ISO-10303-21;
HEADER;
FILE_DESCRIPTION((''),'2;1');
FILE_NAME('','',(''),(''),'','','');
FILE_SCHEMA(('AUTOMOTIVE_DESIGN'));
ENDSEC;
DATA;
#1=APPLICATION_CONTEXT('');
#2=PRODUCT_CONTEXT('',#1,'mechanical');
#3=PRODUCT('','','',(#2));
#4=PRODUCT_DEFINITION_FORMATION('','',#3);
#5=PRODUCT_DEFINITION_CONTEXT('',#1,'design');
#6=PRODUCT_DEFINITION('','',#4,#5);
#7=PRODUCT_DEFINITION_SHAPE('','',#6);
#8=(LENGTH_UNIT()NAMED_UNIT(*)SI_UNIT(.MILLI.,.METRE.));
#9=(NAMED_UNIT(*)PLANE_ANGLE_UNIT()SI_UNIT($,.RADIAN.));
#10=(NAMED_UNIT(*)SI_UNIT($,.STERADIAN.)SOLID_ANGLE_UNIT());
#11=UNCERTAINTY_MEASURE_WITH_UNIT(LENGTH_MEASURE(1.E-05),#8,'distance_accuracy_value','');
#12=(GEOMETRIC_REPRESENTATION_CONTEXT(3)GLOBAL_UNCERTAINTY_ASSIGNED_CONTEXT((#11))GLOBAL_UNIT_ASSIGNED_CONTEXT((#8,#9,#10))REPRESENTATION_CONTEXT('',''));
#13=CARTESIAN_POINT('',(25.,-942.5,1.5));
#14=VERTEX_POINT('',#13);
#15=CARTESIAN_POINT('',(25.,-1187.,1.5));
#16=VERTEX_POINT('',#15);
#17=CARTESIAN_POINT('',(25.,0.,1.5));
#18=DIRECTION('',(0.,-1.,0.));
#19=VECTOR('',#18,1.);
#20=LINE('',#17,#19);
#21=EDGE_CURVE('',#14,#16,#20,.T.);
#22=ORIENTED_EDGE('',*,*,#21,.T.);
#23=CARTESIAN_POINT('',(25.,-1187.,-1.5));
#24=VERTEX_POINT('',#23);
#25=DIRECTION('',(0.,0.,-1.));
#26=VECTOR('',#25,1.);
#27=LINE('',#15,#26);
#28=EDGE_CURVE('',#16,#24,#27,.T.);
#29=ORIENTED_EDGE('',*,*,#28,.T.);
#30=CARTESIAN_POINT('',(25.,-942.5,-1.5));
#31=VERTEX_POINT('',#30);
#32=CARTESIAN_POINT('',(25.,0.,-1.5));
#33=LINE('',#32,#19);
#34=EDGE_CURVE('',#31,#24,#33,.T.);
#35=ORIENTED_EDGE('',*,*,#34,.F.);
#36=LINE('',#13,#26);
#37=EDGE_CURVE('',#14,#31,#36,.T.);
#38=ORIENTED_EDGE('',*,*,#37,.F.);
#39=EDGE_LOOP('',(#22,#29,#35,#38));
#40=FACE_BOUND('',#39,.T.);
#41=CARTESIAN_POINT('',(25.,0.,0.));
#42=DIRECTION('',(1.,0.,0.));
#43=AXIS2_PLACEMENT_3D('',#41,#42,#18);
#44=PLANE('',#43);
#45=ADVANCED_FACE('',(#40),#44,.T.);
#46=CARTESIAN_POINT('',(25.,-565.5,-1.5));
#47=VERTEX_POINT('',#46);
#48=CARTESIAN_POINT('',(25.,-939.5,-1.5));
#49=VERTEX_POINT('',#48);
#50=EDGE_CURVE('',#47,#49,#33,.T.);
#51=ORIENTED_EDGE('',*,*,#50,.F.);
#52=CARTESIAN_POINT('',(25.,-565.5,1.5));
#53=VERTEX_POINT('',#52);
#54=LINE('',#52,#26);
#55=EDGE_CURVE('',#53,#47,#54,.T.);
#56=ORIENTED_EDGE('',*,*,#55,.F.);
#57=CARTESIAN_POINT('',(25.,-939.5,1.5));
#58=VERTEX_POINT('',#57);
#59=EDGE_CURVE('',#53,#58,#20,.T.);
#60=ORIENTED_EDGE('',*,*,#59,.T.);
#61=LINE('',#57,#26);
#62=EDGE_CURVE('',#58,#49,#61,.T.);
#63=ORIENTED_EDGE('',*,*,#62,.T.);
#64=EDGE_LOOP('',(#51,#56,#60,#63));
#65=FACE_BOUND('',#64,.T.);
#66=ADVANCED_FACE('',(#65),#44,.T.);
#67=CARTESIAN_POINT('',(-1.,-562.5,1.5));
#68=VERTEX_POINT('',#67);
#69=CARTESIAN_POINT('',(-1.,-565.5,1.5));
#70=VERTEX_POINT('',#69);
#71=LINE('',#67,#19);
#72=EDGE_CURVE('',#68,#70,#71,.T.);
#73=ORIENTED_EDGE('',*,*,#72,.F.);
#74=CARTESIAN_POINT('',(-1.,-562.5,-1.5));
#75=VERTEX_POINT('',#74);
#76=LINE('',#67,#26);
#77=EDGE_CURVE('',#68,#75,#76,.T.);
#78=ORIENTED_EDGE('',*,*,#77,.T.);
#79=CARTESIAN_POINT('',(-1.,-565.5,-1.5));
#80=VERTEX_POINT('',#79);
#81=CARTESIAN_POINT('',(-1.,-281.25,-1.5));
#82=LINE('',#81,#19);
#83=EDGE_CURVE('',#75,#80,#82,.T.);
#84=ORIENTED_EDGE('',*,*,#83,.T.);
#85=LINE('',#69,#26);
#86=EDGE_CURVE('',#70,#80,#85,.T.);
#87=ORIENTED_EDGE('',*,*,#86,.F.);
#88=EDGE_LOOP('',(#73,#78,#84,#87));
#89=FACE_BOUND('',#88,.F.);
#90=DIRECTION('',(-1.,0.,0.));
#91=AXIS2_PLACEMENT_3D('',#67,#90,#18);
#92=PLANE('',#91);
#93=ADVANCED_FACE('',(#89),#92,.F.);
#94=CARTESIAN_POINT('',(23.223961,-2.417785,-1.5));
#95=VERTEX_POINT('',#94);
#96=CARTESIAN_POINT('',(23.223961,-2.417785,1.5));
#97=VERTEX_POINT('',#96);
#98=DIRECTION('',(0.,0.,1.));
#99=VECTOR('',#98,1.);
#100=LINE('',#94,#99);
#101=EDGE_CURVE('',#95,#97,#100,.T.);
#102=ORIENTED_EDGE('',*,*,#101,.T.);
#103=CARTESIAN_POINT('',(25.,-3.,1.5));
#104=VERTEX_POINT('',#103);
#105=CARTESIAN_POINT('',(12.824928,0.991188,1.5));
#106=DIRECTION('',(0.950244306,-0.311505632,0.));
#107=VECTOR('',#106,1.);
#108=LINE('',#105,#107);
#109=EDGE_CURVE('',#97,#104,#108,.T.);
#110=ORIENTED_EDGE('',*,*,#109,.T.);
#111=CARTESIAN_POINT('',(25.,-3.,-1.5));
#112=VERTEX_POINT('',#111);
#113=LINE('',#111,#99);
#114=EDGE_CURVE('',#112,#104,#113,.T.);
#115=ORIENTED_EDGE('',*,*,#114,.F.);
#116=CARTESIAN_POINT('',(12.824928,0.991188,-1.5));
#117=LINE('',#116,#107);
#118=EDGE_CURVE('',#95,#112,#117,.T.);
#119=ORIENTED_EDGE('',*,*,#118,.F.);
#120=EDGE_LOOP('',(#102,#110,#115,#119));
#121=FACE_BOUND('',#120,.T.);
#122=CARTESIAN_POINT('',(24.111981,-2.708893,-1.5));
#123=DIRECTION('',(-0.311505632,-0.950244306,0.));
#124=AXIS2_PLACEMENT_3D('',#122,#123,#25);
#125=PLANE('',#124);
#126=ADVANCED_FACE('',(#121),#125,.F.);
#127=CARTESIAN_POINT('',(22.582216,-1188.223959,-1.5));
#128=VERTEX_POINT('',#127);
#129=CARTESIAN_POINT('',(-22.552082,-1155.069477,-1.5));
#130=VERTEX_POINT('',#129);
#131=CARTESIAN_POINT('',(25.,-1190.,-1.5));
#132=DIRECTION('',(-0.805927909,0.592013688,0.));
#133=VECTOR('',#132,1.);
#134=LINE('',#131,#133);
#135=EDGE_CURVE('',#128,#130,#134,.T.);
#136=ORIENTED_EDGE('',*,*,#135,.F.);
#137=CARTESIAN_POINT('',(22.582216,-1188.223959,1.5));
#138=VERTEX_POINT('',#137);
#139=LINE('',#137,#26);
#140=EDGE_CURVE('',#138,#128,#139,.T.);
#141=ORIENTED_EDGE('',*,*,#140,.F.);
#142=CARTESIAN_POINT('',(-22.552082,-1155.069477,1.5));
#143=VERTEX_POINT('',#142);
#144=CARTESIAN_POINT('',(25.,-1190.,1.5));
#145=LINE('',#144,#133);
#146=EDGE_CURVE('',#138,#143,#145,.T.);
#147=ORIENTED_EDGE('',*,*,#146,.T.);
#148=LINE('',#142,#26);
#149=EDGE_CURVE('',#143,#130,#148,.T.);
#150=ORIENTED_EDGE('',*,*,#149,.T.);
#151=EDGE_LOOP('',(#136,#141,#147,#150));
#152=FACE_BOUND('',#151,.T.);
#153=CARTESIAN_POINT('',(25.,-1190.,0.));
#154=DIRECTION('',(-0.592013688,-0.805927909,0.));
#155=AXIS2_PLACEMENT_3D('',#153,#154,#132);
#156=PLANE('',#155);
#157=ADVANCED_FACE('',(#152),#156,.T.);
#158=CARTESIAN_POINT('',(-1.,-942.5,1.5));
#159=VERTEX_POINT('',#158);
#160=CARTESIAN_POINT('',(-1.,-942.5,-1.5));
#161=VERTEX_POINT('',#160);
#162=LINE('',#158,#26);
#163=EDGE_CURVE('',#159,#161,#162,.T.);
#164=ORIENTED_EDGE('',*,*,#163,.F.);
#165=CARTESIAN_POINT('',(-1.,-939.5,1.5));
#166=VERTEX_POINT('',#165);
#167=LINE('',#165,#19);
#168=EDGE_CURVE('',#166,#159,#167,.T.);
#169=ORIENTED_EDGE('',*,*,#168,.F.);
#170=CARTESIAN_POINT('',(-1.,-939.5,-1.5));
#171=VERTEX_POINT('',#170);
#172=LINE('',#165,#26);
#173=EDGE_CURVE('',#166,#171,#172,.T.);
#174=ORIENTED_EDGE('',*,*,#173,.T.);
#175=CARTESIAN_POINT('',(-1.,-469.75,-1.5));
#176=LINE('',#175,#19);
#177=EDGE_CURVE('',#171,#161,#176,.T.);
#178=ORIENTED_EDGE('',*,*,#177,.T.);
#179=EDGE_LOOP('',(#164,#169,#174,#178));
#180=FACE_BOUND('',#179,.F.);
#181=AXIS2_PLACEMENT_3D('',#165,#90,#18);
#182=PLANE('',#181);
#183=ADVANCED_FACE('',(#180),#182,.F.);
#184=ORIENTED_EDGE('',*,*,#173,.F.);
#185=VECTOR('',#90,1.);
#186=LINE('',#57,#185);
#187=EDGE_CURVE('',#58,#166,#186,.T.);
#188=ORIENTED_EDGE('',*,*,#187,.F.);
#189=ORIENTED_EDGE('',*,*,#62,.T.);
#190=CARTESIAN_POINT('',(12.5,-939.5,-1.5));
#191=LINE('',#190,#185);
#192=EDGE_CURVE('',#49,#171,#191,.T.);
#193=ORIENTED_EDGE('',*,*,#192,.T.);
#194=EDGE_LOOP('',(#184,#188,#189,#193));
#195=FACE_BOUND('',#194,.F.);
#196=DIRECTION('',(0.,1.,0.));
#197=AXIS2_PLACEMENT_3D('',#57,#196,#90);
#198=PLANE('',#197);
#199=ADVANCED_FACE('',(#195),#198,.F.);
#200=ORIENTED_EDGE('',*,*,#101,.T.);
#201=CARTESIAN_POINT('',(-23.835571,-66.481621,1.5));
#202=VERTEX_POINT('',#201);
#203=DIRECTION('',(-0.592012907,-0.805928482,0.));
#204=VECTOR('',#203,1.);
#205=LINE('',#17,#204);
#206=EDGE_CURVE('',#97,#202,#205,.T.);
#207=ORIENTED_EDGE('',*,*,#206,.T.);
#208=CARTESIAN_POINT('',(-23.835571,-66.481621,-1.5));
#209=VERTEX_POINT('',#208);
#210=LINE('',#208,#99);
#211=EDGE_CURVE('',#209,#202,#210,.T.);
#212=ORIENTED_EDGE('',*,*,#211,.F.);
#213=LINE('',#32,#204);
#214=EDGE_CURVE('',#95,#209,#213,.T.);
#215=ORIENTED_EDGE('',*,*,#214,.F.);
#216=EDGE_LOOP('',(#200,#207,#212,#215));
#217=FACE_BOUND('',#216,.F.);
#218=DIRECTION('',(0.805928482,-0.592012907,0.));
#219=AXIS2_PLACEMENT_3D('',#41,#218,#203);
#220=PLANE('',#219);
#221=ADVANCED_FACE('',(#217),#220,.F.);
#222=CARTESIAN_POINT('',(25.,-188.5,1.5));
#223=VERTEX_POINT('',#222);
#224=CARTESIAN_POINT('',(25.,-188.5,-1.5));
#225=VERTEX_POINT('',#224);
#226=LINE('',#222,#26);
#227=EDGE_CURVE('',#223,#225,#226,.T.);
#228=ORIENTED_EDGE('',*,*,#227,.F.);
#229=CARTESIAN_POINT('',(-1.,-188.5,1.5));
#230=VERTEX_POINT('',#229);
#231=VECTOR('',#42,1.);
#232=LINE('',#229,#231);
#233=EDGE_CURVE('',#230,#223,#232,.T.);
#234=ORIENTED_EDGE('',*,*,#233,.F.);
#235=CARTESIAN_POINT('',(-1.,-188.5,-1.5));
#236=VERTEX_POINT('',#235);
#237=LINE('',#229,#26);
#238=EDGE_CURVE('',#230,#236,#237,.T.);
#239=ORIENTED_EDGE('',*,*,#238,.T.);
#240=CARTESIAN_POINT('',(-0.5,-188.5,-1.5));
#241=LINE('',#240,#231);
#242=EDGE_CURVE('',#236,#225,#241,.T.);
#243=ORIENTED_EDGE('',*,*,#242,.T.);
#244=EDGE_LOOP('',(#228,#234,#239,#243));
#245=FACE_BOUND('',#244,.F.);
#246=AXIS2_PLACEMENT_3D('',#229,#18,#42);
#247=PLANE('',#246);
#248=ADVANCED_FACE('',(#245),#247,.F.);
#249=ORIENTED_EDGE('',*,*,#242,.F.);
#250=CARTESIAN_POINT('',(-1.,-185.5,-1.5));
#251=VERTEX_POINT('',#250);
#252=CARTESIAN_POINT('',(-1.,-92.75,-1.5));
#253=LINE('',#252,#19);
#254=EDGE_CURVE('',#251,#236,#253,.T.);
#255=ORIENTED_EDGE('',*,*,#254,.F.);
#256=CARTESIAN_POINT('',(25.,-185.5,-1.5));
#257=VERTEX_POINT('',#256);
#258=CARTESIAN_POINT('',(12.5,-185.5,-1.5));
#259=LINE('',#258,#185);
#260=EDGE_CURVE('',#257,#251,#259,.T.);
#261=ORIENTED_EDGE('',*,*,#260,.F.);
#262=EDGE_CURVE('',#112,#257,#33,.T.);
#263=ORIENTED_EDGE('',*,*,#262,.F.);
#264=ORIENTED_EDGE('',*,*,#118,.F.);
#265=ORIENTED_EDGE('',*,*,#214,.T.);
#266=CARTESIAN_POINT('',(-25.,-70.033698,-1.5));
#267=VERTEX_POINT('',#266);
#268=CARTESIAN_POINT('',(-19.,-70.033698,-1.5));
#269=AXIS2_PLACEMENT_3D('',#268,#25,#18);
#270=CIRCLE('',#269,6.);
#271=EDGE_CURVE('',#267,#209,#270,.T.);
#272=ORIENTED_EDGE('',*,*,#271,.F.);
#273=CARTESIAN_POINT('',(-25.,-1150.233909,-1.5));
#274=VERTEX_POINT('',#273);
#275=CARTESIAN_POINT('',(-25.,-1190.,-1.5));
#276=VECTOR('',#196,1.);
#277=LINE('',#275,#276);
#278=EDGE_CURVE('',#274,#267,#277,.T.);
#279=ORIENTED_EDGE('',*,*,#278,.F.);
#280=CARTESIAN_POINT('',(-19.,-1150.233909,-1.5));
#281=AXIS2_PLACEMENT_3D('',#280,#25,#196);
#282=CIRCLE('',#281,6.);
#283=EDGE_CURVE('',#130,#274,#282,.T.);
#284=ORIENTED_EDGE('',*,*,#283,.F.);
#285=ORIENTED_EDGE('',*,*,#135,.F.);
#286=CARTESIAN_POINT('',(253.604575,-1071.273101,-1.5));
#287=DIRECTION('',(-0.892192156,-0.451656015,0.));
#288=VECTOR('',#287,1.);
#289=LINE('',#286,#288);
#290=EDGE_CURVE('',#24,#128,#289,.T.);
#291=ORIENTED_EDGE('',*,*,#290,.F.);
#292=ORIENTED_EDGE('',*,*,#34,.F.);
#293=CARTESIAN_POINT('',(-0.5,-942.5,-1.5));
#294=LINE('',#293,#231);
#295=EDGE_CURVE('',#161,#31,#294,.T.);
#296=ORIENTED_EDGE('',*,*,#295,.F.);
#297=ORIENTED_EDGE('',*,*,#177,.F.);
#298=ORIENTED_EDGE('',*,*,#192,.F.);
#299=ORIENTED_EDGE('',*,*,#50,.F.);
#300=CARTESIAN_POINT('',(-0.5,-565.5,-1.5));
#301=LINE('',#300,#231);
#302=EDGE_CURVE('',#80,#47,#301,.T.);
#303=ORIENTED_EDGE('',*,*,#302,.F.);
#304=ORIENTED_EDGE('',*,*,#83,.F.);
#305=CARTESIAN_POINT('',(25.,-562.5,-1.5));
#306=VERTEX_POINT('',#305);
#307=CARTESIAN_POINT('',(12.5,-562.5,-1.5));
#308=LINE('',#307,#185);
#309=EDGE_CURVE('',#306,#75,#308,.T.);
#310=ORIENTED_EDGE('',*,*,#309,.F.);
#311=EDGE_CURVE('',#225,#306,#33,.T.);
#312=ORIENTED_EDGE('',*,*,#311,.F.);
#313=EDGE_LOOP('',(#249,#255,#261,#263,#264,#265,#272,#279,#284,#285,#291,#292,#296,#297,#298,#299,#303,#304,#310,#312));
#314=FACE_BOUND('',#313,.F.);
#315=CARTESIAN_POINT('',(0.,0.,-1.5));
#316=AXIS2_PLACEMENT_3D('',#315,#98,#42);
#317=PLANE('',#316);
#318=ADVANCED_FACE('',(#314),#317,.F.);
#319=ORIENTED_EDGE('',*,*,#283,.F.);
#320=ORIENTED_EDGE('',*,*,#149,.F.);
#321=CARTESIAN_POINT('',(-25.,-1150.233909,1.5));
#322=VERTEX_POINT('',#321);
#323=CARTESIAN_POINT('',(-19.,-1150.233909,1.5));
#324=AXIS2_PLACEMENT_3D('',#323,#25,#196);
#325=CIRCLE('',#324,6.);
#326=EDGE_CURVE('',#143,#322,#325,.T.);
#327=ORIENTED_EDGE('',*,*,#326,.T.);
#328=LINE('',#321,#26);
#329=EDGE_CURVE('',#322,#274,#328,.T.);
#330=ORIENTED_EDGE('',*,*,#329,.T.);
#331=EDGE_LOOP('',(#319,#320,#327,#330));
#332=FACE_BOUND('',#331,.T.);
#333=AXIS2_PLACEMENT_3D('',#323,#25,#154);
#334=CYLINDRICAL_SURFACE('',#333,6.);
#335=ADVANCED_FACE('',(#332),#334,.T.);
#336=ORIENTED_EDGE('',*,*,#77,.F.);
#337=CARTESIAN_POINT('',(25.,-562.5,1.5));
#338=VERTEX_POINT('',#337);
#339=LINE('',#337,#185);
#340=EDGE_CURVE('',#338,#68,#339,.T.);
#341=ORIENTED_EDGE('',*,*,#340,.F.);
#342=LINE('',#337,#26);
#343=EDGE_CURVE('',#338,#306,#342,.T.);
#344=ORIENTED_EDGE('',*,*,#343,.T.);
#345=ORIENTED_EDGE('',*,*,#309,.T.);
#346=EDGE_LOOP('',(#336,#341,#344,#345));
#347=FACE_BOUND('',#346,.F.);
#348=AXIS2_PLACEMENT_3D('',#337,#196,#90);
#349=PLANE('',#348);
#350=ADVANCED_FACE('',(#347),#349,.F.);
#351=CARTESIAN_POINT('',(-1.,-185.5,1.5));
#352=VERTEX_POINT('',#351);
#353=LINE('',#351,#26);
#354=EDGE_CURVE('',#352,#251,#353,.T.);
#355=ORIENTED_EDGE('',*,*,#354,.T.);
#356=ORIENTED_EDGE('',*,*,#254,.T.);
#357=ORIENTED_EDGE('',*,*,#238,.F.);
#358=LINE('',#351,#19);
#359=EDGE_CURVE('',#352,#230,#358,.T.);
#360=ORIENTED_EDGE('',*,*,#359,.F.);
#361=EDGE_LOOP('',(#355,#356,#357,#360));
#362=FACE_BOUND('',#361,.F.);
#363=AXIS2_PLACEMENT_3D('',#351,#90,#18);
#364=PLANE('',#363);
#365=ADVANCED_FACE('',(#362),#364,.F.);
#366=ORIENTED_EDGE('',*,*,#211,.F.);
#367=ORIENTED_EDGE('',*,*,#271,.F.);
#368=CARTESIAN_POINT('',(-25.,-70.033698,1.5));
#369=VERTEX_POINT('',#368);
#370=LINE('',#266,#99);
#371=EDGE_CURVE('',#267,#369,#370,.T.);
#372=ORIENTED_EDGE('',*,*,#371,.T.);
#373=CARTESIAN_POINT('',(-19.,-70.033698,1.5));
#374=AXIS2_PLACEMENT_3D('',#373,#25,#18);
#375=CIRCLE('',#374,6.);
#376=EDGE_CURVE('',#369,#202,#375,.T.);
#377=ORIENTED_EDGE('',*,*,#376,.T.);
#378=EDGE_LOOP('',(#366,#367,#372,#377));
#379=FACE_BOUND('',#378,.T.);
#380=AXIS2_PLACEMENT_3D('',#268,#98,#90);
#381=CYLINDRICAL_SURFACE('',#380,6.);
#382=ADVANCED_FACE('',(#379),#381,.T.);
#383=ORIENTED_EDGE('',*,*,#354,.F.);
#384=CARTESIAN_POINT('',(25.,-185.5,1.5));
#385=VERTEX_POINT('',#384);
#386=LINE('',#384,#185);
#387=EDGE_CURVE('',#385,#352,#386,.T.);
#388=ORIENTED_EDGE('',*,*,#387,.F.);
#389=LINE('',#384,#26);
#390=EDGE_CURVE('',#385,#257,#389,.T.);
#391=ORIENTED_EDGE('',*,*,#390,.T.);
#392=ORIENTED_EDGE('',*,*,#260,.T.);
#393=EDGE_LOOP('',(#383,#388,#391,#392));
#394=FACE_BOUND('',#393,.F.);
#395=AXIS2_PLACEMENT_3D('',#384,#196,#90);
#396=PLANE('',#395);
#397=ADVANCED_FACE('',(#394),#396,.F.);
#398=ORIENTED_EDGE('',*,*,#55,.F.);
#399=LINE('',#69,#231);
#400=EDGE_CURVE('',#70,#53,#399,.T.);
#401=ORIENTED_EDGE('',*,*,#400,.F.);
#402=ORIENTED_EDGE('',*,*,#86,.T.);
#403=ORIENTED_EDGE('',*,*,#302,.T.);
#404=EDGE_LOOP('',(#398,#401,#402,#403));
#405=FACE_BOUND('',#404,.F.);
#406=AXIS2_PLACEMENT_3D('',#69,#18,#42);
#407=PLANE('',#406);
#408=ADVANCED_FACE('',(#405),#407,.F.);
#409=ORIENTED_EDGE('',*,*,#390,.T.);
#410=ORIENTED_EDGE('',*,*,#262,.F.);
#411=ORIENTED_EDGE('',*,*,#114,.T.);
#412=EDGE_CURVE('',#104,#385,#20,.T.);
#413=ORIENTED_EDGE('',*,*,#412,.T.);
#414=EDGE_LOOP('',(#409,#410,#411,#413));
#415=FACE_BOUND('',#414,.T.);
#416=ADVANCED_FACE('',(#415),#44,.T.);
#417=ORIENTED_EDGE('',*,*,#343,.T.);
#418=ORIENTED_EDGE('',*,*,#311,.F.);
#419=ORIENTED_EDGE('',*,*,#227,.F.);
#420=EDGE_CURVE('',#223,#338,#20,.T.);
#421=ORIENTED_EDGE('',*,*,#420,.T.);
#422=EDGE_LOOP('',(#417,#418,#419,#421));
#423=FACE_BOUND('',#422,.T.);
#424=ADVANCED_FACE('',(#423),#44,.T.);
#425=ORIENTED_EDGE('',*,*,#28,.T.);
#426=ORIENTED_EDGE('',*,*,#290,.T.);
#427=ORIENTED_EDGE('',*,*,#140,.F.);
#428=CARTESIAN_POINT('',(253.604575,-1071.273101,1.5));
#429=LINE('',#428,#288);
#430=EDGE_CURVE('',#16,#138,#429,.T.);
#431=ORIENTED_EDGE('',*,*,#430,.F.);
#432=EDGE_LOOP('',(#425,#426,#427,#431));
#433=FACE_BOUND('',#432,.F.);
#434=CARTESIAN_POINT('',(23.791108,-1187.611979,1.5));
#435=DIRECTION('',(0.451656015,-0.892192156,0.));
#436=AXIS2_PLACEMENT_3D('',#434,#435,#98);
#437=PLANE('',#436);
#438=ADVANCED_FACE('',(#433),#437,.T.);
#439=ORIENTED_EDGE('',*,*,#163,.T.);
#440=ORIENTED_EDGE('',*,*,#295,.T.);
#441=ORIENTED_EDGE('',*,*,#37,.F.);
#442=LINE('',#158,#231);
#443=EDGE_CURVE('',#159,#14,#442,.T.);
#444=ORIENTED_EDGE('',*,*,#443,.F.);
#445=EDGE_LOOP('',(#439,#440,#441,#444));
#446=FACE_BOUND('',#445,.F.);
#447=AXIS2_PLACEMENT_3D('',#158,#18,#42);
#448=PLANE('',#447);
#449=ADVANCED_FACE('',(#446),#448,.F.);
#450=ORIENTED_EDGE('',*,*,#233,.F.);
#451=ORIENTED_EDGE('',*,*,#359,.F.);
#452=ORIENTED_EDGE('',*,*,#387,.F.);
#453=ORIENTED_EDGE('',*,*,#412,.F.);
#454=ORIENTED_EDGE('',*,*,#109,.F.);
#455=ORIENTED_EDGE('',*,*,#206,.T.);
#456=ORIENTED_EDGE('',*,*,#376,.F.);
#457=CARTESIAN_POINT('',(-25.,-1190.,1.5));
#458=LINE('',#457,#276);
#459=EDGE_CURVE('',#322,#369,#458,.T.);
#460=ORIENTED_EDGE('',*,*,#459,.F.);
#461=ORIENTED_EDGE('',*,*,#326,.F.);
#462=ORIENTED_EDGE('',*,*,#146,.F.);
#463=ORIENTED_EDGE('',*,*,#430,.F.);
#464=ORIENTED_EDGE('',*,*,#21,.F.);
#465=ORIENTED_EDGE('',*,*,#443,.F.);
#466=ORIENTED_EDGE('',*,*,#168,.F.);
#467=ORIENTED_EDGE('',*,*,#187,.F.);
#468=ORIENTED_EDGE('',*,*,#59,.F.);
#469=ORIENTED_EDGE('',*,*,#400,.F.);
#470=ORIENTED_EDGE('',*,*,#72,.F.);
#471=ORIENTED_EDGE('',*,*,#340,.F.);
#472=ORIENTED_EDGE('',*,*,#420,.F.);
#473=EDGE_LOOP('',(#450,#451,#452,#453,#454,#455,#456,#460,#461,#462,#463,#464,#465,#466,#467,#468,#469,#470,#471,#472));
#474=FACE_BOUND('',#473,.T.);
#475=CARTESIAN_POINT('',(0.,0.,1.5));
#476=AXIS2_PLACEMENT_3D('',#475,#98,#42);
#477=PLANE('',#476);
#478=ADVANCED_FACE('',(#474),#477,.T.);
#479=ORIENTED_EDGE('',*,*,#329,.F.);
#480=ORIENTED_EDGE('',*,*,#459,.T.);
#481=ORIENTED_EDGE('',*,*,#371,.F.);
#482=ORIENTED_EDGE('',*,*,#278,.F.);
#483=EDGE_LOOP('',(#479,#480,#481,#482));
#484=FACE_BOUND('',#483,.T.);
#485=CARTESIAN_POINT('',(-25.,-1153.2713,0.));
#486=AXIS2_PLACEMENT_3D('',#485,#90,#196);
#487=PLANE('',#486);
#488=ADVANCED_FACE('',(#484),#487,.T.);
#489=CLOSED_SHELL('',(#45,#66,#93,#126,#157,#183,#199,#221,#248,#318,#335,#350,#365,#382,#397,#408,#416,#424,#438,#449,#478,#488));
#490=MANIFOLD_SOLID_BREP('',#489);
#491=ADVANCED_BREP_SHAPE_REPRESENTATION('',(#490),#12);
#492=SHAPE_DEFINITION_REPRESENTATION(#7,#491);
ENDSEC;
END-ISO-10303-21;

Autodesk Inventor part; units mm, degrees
ref_plane "YZ Plane" through (0, 0, 0) normal (1, 0, 0) x (0, 1, 0)
ref_plane "XZ Plane" through (0, 0, 0) normal (0, 1, 0) x (-1, 0, 0)
ref_plane "XY Plane" through (0, 0, 0) normal (0, 0, 1) x (1, 0, 0)
sketch "Sketch1" plane through (0, 0, 0) normal (0, 0, 1) x (1, 0, 0)
  line L0 (-25, 0) -> (25, 0)
  line L1 (25, 0) -> (25, -1190)
  line L2 (25, -1190) -> (-25, -1190)
  line L3 (-25, -1190) -> (-25, 0)
  line L4 (25, -1190) -> (-25, -1153.2713)
  line L5 (25, 0) -> (-25, -68.0668)
  point P0 (0, 0)
  point P1 (0, 0)
  point P2 (25, -1153.2713)
  dimension "d0" = 50
  dimension "d1" = 1190
  dimension "d5" = 53.7
  dimension "d6" = 53.7
extrude "Plate1" add sketch "Sketch1" along normal mid plane 3 contours L1 L4 L3 L5
chamfer "Corner Chamfer1" distance 3 angle 45 1 edges at (25, -1190, 0)
fillet "Corner Round1" radius 6 1 edges at (-25, -1153.2713, 0)
fillet "Corner Round2" radius 6 1 edges at (-25, -68.0668, 0)
chamfer "Corner Chamfer3" distance 3 angle 45 1 edges at (25, 0, 0)
sketch "Sketch3" plane through (0, 0, 1.5) normal (0, 0, 1) x (1, 0, 0)
  line L0 (-1, -188.5) -> (25, -188.5)
  line L1 (25, -188.5) -> (25, -185.5)
  line L2 (25, -185.5) -> (-1, -185.5)
  line L3 (-1, -185.5) -> (-1, -188.5)
  line L4 (25, -3) -> (25, -1187) projected
  point P0 (0, 0)
  point P1 (25, -187)
  dimension "d18" = 187
  dimension "d19" = 26
  dimension "d20" = 3
extrude "Extrusion1" cut sketch "Sketch3" against normal through all
pattern_linear "Rectangular Pattern1" count 3 spacing 377 along (0, -1, 0) of "Extrusion1"
equation "\"d6\" = d5"
equation "\"d2\" = Thickness"
equation "\"BendReliefWidth\" = Thickness"
equation "\"BendReliefDepth\" = 0.5 * Thickness"
equation "\"CornerReliefSize\" = 4 * Thickness"
equation "\"MinimumRemnant\" = 2 * Thickness"
equation "\"TransitionRadius\" = BendRadius"
equation "\"JacobiRadiusSize\" = BendRadius"
equation "\"GapSize\" = Thickness"
equation "\"Thickness\" = 3"
equation "\"BendRadius\" = 5"
properties part number "MSC 602 stringer cone exit back" material "Stainless Steel"
